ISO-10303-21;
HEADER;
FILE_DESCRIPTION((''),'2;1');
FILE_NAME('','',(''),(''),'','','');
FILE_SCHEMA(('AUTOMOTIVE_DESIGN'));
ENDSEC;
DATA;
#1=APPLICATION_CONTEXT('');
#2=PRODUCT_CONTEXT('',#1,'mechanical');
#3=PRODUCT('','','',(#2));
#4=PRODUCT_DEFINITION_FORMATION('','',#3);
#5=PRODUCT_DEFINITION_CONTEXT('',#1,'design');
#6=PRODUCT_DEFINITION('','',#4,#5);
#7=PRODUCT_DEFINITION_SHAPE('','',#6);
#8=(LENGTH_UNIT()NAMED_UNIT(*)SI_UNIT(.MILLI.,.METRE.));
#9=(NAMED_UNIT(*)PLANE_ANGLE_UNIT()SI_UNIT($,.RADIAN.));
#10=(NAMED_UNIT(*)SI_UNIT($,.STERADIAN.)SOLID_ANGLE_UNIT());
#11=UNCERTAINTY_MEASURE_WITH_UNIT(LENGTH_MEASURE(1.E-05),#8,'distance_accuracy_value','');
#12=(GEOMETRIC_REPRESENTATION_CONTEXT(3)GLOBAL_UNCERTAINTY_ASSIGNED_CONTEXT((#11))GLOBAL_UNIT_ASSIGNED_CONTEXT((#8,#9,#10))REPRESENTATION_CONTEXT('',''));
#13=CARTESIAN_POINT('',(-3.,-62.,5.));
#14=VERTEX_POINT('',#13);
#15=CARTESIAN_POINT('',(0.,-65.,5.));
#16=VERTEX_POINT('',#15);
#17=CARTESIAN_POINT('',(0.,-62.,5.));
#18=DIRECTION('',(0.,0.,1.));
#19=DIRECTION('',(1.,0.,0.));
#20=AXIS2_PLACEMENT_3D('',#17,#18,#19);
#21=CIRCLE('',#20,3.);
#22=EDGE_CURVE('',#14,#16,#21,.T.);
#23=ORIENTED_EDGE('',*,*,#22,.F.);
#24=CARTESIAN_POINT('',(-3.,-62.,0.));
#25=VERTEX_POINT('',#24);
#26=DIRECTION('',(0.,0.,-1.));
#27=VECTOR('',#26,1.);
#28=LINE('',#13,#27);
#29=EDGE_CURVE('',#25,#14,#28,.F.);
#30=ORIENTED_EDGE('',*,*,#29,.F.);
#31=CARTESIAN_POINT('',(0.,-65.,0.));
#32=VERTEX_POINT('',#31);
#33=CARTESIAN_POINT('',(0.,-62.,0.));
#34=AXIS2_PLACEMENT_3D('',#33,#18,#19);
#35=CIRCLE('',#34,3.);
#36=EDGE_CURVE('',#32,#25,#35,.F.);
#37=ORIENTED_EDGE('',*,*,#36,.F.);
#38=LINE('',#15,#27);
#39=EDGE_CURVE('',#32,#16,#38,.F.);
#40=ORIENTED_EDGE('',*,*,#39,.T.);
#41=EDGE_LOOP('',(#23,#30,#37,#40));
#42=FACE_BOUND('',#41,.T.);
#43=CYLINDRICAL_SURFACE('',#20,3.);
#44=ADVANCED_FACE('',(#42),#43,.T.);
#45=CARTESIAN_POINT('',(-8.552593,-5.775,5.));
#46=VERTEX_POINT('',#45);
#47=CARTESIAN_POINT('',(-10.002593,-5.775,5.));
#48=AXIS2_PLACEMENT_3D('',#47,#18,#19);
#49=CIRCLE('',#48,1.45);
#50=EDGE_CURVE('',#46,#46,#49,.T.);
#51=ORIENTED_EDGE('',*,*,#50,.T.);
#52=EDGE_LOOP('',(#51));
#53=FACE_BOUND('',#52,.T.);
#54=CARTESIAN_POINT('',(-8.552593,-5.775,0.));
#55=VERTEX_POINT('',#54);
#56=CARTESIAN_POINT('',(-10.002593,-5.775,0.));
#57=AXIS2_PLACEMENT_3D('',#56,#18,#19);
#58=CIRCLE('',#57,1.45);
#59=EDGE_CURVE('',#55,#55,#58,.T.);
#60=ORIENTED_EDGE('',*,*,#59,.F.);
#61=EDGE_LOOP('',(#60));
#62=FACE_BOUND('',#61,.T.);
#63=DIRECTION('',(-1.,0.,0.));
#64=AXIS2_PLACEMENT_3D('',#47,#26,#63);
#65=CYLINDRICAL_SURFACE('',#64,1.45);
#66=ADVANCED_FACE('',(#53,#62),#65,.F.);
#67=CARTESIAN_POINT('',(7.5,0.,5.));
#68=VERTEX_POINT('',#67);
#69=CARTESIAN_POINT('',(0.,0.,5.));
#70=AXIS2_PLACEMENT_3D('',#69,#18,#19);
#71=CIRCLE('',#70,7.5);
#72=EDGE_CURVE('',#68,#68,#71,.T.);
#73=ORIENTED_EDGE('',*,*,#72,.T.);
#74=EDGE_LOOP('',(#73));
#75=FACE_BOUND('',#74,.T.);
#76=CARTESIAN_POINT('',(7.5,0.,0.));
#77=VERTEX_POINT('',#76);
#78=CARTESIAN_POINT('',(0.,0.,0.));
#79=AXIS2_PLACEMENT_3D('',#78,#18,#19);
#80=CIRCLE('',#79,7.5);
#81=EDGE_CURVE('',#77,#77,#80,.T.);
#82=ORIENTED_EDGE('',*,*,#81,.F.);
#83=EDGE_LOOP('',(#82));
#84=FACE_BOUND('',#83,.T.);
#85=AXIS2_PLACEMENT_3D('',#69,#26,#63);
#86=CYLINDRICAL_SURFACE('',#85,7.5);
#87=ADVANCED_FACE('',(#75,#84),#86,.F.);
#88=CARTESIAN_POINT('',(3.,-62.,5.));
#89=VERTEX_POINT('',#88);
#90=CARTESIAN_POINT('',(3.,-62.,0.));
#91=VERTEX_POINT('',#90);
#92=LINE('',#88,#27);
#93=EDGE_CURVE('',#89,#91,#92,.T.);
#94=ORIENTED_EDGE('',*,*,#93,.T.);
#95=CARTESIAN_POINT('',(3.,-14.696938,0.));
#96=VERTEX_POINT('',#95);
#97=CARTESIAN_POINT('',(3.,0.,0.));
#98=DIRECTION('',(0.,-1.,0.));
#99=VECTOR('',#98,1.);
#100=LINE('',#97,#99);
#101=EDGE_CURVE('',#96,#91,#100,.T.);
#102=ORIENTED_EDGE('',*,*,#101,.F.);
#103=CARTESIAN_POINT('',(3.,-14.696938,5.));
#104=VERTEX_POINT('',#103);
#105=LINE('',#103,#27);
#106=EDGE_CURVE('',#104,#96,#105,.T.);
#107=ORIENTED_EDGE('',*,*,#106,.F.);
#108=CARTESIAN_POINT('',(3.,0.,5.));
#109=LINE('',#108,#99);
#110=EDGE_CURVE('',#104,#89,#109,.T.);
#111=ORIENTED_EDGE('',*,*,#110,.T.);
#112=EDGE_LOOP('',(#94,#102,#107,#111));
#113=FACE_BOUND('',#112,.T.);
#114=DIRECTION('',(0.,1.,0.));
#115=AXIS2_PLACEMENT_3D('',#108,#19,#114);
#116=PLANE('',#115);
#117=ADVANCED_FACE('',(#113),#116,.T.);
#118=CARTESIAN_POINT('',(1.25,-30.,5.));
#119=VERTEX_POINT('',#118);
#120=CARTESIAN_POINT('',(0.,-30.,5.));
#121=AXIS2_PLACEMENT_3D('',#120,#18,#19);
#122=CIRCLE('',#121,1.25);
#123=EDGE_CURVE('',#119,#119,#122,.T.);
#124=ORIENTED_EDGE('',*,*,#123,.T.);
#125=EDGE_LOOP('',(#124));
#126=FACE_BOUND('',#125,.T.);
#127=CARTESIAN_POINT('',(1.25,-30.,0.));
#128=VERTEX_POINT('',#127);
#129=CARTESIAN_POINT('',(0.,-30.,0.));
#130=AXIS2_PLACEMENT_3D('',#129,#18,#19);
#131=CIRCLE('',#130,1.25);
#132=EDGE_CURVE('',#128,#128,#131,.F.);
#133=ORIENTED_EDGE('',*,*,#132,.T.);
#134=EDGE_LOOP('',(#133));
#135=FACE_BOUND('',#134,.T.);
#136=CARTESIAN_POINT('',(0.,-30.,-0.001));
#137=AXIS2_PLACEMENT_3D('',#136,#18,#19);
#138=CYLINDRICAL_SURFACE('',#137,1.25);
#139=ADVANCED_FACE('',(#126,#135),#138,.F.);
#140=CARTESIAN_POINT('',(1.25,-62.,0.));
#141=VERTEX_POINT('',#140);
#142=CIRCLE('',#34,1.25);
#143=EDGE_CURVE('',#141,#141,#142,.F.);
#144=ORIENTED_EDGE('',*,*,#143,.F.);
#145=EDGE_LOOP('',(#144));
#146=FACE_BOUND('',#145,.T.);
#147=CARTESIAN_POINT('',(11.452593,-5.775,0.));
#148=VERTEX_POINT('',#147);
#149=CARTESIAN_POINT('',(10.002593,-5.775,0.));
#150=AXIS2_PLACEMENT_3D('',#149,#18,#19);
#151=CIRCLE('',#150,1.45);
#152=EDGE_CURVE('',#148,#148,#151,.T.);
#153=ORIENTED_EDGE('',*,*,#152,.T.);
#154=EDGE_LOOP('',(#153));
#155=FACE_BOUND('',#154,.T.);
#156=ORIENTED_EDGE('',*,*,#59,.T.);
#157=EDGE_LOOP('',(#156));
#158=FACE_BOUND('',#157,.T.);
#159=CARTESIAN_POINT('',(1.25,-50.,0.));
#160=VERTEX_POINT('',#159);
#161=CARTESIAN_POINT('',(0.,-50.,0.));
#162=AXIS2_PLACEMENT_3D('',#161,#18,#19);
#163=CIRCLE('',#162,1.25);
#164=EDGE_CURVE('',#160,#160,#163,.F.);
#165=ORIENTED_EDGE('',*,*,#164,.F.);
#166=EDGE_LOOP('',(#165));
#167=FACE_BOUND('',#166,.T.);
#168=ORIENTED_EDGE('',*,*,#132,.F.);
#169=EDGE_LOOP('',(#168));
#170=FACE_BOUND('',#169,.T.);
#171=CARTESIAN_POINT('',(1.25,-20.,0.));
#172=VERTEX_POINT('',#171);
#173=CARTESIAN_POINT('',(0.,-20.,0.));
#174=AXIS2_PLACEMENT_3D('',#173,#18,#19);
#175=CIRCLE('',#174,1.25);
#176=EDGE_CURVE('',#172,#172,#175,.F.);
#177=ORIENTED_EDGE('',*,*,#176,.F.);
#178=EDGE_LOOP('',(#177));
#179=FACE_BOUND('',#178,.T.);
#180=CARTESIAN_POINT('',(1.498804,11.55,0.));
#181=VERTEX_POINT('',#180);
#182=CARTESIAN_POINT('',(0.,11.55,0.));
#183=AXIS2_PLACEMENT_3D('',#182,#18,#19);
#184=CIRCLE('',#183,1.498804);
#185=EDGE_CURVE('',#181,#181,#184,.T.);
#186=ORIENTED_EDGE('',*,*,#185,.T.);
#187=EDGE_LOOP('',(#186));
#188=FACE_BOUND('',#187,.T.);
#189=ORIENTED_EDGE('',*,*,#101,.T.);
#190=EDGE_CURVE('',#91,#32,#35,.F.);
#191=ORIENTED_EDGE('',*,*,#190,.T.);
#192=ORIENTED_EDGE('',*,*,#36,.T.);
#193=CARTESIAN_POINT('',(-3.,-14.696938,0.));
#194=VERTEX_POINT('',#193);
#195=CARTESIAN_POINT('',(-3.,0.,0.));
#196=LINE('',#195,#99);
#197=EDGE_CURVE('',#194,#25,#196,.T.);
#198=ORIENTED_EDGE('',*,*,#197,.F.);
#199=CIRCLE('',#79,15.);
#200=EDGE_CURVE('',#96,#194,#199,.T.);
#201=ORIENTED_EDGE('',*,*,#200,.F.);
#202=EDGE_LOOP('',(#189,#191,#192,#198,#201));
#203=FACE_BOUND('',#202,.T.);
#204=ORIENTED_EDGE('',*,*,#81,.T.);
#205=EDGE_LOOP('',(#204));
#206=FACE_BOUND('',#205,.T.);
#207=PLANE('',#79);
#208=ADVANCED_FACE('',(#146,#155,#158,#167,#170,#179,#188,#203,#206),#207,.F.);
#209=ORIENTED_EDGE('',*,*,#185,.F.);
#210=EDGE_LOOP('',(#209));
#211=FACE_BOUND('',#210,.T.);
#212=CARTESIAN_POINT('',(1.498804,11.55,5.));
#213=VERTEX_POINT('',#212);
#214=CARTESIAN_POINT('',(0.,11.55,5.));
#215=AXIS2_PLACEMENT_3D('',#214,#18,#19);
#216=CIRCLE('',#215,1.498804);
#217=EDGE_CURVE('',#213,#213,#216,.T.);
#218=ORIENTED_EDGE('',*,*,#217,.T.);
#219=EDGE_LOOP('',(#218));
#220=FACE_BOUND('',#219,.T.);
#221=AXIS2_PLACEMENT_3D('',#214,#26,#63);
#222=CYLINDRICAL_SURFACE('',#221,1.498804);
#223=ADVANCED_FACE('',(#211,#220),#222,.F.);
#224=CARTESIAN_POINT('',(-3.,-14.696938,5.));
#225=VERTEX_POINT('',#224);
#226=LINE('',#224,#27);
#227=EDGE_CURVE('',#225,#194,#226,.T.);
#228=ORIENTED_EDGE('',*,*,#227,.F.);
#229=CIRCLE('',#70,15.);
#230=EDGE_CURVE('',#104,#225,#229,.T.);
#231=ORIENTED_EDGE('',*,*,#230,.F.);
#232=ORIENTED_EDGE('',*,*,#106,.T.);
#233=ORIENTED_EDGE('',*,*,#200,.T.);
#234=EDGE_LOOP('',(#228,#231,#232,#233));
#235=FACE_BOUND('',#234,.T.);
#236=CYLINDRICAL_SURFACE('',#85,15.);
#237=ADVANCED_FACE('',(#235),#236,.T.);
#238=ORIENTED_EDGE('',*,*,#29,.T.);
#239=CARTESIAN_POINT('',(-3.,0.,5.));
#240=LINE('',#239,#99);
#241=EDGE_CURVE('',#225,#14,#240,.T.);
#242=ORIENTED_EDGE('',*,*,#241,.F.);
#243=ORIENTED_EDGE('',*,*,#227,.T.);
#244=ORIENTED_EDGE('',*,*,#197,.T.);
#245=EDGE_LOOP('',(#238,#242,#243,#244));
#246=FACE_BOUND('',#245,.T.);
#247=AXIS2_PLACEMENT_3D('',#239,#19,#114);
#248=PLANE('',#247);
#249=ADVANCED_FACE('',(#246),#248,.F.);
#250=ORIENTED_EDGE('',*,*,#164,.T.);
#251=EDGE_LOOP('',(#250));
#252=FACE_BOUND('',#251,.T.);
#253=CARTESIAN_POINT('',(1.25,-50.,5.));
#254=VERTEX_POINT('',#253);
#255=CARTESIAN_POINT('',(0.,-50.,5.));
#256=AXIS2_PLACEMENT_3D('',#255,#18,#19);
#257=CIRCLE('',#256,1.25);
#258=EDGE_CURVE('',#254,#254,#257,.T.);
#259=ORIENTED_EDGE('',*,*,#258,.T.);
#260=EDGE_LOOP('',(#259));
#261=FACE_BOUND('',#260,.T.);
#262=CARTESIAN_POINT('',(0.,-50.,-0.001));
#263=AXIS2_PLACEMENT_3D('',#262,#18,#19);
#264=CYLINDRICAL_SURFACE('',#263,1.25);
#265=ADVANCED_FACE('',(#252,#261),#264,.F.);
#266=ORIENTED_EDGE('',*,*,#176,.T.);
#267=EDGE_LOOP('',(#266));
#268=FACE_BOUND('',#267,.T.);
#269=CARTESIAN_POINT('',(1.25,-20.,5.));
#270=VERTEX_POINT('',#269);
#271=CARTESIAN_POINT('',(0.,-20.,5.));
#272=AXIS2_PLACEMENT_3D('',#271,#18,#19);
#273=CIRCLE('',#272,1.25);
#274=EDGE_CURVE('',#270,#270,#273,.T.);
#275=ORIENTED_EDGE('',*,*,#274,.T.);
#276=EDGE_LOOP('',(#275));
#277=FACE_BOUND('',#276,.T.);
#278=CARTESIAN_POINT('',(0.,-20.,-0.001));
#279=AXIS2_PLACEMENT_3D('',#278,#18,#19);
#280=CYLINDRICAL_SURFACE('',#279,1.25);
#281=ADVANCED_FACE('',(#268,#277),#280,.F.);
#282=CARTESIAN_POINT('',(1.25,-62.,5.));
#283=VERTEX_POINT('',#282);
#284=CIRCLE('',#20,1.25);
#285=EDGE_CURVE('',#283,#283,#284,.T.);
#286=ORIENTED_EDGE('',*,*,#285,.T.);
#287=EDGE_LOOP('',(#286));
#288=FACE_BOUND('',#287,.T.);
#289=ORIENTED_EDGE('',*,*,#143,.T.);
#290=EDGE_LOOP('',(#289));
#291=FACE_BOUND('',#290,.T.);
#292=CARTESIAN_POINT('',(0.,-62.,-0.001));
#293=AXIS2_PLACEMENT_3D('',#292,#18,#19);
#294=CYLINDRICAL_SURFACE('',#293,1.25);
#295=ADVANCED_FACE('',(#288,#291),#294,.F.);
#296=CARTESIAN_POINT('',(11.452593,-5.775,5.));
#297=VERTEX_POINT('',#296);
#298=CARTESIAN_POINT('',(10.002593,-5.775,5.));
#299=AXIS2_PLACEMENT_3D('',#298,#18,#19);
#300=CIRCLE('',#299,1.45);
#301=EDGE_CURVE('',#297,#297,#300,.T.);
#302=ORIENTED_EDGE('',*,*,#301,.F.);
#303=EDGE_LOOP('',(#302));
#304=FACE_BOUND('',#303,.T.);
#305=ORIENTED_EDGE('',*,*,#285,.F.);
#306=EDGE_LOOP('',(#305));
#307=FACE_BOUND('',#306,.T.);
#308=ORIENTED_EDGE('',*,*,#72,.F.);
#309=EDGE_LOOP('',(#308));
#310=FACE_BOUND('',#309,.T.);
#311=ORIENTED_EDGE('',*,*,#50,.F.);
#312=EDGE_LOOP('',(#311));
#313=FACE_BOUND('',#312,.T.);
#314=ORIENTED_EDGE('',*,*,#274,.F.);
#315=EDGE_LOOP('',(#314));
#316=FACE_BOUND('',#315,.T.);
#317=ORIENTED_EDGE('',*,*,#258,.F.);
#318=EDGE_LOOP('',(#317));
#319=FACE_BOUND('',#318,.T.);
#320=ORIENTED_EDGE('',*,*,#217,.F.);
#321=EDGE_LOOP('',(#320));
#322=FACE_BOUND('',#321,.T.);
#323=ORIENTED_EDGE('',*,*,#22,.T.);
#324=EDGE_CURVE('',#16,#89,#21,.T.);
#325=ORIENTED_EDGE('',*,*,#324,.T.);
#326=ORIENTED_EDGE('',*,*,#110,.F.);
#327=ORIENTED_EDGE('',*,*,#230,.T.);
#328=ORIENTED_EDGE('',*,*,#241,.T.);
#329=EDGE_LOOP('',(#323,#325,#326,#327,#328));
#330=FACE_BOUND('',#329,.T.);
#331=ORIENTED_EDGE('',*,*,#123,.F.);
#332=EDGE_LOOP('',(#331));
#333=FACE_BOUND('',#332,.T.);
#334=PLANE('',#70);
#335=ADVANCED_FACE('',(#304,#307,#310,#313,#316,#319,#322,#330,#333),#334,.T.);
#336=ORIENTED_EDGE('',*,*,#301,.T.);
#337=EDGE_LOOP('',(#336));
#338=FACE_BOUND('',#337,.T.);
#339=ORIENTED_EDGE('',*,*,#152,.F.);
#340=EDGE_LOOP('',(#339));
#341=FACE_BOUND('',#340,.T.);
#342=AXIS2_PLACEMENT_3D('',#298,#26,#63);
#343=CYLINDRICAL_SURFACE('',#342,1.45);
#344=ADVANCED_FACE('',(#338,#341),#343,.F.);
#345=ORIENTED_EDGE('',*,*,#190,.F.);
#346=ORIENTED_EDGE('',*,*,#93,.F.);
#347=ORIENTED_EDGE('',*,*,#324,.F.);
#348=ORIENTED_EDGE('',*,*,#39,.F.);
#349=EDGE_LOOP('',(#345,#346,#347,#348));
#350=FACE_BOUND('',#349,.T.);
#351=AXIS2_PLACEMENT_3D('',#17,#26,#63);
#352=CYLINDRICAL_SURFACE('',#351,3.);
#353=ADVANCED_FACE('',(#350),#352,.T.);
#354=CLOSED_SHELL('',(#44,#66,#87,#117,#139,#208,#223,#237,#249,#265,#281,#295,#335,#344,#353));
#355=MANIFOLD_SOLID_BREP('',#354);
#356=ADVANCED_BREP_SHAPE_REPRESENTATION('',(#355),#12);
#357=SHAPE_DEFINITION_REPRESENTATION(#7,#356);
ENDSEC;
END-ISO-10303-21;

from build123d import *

# Parameters (mm, degrees)
ESQUISSE1_R             = 15
ESQUISSE1_R_2           = 1.45
ESQUISSE1_R_3           = 1.498803823
ESQUISSE1_R_4           = 7.5
BOSS_EXTRU_1_DEPTH      = 5
CONG_1_R                = 3
CONG_2_R                = 3
ENL_V_MAT_EXTRU_1_REACH = 68.895
ESQUISSE2_R             = 1.25


with BuildPart() as part:
    # Esquisse1 → Boss.-Extru.1 (new body)
    # profile 1 of 3: a face of its own
    with BuildSketch(Plane.XY):
        with BuildLine():
            ThreePointArc((3, -14.696938457), (1.50763443, -14.924042295), (0, -15))
            Line((0, -15), (0, -65))
            Line((0, -65), (3, -65))
            Line((3, -65), (3, -14.696938457))
        make_face()
    # profile 2 of 3: a face of its own
    with BuildSketch(Plane.XY):
        with BuildLine():
            Line((0, -65), (0, -15))
            ThreePointArc((0, -15), (-1.50763443, -14.924042295), (-3, -14.696938457))
            Line((-3, -14.696938457), (-3, -65))
            Line((-3, -65), (0, -65))
        make_face()
    # profile 3 of 3: a face of its own
    with BuildSketch(Plane.XY):
        Circle(ESQUISSE1_R)
        with Locations((10.002593414, -5.775)):
            Circle(ESQUISSE1_R_2, mode=Mode.SUBTRACT)
        with Locations((0, 11.55)):
            Circle(ESQUISSE1_R_3, mode=Mode.SUBTRACT)
        with Locations((-10.002593414, -5.775)):
            Circle(ESQUISSE1_R_2, mode=Mode.SUBTRACT)
        Circle(ESQUISSE1_R_4, mode=Mode.SUBTRACT)
    extrude(amount=BOSS_EXTRU_1_DEPTH)

    # Congé1
    cong_1_edges = [part.edges().sort_by_distance(p)[0] for p in [
        (3, -65, 2.5),
    ]]
    fillet(cong_1_edges, radius=CONG_1_R)

    # Congé2
    cong_2_edges = [part.edges().sort_by_distance(p)[0] for p in [
        (-3, -65, 2.5),
    ]]
    fillet(cong_2_edges, radius=CONG_2_R - 0.0001)  # a hair under: the kernel refuses the full size

    # Esquisse2 → Enlèv. mat.-Extru.1 (cut, up to next)
    with BuildSketch(Plane.XY.offset(5), mode=Mode.PRIVATE) as enl_v_mat_extru_1_sk1:
        with Locations((0, -20)):
            Circle(ESQUISSE2_R)
    enl_v_mat_extru_1_tool1 = extrude(enl_v_mat_extru_1_sk1.sketch, amount=-ENL_V_MAT_EXTRU_1_REACH, mode=Mode.PRIVATE) & part.part
    # Esquisse2 → Enlèv. mat.-Extru.1 (cut, up to next)
    with BuildSketch(Plane.XY.offset(5), mode=Mode.PRIVATE) as enl_v_mat_extru_1_sk2:
        with Locations((0, -30)):
            Circle(ESQUISSE2_R)
    enl_v_mat_extru_1_tool2 = extrude(enl_v_mat_extru_1_sk2.sketch, amount=-ENL_V_MAT_EXTRU_1_REACH, mode=Mode.PRIVATE) & part.part
    # Esquisse2 → Enlèv. mat.-Extru.1 (cut, up to next)
    with BuildSketch(Plane.XY.offset(5), mode=Mode.PRIVATE) as enl_v_mat_extru_1_sk3:
        with Locations((0, -50)):
            Circle(ESQUISSE2_R)
    enl_v_mat_extru_1_tool3 = extrude(enl_v_mat_extru_1_sk3.sketch, amount=-ENL_V_MAT_EXTRU_1_REACH, mode=Mode.PRIVATE) & part.part
    # Esquisse2 → Enlèv. mat.-Extru.1 (cut, up to next)
    with BuildSketch(Plane.XY.offset(5), mode=Mode.PRIVATE) as enl_v_mat_extru_1_sk4:
        with Locations((0, -62)):
            Circle(ESQUISSE2_R)
    enl_v_mat_extru_1_tool4 = extrude(enl_v_mat_extru_1_sk4.sketch, amount=-ENL_V_MAT_EXTRU_1_REACH, mode=Mode.PRIVATE) & part.part
    add(enl_v_mat_extru_1_tool1.solids().sort_by_distance((0, -20, 5))[0], mode=Mode.SUBTRACT)
    add(enl_v_mat_extru_1_tool2.solids().sort_by_distance((0, -30, 5))[0], mode=Mode.SUBTRACT)
    add(enl_v_mat_extru_1_tool3.solids().sort_by_distance((0, -50, 5))[0], mode=Mode.SUBTRACT)
    add(enl_v_mat_extru_1_tool4.solids().sort_by_distance((0, -62, 5))[0], mode=Mode.SUBTRACT)


solid = part.part
